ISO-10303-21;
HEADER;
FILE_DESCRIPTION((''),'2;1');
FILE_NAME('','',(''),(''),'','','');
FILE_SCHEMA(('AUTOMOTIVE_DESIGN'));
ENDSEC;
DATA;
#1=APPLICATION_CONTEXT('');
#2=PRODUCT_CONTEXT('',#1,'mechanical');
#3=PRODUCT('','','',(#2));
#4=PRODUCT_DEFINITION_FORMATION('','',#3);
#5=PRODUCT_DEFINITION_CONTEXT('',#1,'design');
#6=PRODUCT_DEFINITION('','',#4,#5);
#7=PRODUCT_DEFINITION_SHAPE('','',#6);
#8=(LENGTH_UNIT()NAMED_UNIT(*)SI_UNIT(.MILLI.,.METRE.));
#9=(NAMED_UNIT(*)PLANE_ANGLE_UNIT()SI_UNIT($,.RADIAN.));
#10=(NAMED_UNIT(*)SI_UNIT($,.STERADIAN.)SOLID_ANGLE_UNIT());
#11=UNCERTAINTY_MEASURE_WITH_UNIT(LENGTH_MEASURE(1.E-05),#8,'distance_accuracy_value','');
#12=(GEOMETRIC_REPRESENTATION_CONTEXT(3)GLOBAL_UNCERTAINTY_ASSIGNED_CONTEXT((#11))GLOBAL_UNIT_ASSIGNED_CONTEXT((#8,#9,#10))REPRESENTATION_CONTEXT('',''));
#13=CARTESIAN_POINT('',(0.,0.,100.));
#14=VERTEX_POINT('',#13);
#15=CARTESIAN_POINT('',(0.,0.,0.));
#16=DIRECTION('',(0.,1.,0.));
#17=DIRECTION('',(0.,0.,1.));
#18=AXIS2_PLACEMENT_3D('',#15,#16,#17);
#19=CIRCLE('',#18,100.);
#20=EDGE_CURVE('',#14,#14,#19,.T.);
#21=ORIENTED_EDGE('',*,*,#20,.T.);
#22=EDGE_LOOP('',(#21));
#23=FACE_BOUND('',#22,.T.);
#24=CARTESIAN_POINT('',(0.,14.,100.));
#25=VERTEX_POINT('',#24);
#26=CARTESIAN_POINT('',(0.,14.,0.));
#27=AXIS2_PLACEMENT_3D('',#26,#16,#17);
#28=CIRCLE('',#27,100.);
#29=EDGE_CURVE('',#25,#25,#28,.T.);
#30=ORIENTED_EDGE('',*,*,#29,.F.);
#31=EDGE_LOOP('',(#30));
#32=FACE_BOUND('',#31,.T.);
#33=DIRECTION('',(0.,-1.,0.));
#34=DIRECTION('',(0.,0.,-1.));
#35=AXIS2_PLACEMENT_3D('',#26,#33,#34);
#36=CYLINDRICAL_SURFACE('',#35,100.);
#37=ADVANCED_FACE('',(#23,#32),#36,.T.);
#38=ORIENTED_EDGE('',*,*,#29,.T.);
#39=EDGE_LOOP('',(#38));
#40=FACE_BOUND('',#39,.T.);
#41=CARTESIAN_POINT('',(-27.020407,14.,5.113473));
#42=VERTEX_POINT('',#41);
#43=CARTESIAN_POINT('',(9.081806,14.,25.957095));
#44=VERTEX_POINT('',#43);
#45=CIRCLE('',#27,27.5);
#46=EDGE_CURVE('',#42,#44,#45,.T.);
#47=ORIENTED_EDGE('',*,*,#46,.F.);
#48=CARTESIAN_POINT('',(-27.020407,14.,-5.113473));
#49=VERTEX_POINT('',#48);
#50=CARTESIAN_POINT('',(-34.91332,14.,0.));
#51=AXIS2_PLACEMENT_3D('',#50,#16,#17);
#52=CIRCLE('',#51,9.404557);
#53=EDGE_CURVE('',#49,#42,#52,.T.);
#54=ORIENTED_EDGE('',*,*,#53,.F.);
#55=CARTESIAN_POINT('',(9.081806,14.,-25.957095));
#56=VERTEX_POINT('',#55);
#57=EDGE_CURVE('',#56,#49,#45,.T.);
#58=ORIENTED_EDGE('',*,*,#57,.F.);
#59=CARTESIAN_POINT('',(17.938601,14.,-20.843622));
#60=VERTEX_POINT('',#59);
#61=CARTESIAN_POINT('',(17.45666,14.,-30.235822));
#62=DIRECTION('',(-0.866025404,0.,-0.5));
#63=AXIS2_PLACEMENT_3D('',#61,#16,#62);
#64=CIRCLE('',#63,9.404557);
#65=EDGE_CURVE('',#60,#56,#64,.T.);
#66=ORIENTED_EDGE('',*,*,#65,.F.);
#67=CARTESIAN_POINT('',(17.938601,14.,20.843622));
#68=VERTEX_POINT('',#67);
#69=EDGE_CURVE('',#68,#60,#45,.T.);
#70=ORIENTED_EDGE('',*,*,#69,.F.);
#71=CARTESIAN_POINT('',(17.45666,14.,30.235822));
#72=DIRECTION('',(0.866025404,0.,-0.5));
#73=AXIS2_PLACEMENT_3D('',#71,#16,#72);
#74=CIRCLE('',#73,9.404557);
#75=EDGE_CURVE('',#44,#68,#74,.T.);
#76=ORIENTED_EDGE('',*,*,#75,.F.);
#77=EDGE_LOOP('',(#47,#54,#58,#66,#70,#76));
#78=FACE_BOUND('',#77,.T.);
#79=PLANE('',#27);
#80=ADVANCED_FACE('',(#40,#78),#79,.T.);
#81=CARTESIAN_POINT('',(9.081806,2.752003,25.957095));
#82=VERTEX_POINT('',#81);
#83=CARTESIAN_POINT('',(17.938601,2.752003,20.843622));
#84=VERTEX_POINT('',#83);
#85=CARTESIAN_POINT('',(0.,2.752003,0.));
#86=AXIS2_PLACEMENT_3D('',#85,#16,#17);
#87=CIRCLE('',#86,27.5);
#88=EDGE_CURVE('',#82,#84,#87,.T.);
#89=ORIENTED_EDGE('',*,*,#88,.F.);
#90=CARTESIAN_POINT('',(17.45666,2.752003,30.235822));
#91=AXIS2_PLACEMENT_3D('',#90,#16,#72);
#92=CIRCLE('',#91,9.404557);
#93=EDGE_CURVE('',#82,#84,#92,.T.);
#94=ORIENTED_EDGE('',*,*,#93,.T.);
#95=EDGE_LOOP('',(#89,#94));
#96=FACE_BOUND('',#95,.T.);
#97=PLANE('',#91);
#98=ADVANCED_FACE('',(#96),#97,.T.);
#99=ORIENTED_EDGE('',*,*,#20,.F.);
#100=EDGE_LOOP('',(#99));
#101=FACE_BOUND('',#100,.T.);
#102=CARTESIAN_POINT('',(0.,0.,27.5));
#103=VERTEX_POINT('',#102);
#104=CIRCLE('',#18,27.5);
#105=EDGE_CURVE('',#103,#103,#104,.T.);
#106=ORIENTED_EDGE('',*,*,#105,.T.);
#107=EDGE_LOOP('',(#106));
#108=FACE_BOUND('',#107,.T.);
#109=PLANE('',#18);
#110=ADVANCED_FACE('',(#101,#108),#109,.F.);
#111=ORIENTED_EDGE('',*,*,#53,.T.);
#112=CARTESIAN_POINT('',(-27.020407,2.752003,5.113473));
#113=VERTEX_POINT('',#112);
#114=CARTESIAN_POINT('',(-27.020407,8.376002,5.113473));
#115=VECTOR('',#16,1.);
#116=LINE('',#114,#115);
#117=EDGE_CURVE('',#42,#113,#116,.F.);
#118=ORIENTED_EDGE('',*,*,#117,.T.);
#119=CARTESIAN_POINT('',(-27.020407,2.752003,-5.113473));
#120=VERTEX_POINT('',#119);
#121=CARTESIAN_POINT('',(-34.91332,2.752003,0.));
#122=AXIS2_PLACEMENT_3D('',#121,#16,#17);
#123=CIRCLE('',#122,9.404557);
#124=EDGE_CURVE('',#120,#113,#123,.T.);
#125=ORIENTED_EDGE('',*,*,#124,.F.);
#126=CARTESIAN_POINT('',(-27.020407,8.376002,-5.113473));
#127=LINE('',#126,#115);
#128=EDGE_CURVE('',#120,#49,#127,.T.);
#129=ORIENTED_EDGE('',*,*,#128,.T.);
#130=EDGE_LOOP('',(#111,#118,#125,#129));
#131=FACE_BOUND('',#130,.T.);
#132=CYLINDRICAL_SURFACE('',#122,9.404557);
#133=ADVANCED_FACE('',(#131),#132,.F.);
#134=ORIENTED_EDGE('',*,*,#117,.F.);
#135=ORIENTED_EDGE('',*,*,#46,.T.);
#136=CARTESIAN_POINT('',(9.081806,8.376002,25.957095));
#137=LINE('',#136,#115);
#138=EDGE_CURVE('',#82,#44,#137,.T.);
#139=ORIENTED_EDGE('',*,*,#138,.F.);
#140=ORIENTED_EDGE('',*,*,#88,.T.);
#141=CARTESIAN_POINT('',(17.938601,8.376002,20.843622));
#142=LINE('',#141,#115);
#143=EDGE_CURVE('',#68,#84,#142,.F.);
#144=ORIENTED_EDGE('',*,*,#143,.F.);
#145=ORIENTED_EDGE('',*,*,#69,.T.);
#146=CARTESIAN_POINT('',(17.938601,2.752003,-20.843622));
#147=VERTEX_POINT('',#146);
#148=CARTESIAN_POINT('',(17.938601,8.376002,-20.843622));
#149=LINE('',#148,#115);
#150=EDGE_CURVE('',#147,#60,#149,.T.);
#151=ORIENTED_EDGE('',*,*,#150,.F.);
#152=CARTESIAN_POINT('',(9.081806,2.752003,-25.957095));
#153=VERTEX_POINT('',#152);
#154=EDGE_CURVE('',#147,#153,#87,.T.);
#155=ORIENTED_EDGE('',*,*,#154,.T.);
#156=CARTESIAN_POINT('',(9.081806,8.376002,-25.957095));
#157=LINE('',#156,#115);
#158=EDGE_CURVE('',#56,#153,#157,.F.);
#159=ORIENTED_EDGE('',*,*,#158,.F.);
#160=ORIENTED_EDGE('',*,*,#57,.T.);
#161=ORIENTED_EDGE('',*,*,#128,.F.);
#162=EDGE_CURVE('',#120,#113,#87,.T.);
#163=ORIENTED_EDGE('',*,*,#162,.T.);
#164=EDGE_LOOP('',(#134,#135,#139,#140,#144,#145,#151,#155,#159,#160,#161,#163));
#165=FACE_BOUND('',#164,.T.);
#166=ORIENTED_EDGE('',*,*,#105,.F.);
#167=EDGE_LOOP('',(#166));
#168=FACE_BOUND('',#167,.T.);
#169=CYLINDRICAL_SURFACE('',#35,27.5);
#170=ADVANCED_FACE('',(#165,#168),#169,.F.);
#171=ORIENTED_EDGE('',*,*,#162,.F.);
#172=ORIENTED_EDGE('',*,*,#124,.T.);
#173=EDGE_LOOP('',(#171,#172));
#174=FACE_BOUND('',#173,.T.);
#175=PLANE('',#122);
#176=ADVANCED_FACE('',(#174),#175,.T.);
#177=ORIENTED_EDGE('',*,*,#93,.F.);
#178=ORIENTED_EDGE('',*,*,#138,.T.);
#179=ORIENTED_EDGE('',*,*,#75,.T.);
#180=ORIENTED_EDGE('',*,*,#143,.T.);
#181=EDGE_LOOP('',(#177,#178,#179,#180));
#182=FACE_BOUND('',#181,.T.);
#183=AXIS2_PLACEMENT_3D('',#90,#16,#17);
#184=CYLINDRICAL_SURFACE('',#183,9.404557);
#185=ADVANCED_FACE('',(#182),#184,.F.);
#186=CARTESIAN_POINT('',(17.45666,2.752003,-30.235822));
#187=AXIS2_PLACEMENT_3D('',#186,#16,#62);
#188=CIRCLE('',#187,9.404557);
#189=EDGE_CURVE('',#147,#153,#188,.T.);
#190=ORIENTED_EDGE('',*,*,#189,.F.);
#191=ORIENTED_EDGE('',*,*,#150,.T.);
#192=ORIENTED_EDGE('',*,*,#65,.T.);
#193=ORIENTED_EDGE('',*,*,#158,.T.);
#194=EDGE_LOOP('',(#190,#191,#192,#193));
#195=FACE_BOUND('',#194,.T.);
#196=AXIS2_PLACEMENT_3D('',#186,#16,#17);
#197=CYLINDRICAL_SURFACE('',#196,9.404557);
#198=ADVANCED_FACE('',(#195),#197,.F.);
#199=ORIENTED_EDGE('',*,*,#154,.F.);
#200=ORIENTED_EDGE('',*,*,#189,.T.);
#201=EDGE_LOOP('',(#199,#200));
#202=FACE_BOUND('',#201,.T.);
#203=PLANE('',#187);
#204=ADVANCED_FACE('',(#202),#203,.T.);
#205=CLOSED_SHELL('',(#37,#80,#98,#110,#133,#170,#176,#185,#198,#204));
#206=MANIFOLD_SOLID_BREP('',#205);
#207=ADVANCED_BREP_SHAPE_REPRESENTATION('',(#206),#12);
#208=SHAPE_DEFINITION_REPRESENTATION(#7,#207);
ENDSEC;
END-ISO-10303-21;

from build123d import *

# Parameters (mm, degrees)
SKETCH1_R           = 100
BOSS_EXTRUDE1_DEPTH = 14
SKETCH2_R           = 27.5
CUT_EXTRUDE1_DEPTH  = 143.112631388
SKETCH3_R           = 9.404556639
CUT_EXTRUDE2_DEPTH  = 11.247996881
CIRPATTERN1_COUNT   = 3


with BuildPart() as part:
    # Sketch1 → Boss-Extrude1 (new body)
    with BuildSketch(Plane(origin=(0, 0, 0), x_dir=(1, 0, 0), z_dir=(0, 1, 0))):
        Circle(SKETCH1_R)
    extrude(amount=BOSS_EXTRUDE1_DEPTH)

    # Sketch2 → Cut-Extrude1 (cut, through all)
    with BuildSketch(Plane(origin=(0, 0, 0), x_dir=(1, 0, 0), z_dir=(0, 1, 0))):
        Circle(SKETCH2_R)
    extrude(amount=CUT_EXTRUDE1_DEPTH, mode=Mode.SUBTRACT)

    # Sketch3 → Cut-Extrude2 (cut)
    with BuildSketch(Plane(origin=(0, 14, 0), x_dir=(1, 0, 0), z_dir=(0, 1, 0))):
        with Locations((-34.913320069, 0)):
            Circle(SKETCH3_R)
    cut_extrude2 = extrude(amount=-CUT_EXTRUDE2_DEPTH, mode=Mode.SUBTRACT)

    # CirPattern1: Cut-Extrude2 ×3 about axis
    cirpattern1_axis = Axis((0, 0, 0), (0, 1, 0))
    for i in range(1, CIRPATTERN1_COUNT):
        add(cut_extrude2.rotate(cirpattern1_axis, i * 360 / CIRPATTERN1_COUNT), mode=Mode.SUBTRACT)


solid = part.part
